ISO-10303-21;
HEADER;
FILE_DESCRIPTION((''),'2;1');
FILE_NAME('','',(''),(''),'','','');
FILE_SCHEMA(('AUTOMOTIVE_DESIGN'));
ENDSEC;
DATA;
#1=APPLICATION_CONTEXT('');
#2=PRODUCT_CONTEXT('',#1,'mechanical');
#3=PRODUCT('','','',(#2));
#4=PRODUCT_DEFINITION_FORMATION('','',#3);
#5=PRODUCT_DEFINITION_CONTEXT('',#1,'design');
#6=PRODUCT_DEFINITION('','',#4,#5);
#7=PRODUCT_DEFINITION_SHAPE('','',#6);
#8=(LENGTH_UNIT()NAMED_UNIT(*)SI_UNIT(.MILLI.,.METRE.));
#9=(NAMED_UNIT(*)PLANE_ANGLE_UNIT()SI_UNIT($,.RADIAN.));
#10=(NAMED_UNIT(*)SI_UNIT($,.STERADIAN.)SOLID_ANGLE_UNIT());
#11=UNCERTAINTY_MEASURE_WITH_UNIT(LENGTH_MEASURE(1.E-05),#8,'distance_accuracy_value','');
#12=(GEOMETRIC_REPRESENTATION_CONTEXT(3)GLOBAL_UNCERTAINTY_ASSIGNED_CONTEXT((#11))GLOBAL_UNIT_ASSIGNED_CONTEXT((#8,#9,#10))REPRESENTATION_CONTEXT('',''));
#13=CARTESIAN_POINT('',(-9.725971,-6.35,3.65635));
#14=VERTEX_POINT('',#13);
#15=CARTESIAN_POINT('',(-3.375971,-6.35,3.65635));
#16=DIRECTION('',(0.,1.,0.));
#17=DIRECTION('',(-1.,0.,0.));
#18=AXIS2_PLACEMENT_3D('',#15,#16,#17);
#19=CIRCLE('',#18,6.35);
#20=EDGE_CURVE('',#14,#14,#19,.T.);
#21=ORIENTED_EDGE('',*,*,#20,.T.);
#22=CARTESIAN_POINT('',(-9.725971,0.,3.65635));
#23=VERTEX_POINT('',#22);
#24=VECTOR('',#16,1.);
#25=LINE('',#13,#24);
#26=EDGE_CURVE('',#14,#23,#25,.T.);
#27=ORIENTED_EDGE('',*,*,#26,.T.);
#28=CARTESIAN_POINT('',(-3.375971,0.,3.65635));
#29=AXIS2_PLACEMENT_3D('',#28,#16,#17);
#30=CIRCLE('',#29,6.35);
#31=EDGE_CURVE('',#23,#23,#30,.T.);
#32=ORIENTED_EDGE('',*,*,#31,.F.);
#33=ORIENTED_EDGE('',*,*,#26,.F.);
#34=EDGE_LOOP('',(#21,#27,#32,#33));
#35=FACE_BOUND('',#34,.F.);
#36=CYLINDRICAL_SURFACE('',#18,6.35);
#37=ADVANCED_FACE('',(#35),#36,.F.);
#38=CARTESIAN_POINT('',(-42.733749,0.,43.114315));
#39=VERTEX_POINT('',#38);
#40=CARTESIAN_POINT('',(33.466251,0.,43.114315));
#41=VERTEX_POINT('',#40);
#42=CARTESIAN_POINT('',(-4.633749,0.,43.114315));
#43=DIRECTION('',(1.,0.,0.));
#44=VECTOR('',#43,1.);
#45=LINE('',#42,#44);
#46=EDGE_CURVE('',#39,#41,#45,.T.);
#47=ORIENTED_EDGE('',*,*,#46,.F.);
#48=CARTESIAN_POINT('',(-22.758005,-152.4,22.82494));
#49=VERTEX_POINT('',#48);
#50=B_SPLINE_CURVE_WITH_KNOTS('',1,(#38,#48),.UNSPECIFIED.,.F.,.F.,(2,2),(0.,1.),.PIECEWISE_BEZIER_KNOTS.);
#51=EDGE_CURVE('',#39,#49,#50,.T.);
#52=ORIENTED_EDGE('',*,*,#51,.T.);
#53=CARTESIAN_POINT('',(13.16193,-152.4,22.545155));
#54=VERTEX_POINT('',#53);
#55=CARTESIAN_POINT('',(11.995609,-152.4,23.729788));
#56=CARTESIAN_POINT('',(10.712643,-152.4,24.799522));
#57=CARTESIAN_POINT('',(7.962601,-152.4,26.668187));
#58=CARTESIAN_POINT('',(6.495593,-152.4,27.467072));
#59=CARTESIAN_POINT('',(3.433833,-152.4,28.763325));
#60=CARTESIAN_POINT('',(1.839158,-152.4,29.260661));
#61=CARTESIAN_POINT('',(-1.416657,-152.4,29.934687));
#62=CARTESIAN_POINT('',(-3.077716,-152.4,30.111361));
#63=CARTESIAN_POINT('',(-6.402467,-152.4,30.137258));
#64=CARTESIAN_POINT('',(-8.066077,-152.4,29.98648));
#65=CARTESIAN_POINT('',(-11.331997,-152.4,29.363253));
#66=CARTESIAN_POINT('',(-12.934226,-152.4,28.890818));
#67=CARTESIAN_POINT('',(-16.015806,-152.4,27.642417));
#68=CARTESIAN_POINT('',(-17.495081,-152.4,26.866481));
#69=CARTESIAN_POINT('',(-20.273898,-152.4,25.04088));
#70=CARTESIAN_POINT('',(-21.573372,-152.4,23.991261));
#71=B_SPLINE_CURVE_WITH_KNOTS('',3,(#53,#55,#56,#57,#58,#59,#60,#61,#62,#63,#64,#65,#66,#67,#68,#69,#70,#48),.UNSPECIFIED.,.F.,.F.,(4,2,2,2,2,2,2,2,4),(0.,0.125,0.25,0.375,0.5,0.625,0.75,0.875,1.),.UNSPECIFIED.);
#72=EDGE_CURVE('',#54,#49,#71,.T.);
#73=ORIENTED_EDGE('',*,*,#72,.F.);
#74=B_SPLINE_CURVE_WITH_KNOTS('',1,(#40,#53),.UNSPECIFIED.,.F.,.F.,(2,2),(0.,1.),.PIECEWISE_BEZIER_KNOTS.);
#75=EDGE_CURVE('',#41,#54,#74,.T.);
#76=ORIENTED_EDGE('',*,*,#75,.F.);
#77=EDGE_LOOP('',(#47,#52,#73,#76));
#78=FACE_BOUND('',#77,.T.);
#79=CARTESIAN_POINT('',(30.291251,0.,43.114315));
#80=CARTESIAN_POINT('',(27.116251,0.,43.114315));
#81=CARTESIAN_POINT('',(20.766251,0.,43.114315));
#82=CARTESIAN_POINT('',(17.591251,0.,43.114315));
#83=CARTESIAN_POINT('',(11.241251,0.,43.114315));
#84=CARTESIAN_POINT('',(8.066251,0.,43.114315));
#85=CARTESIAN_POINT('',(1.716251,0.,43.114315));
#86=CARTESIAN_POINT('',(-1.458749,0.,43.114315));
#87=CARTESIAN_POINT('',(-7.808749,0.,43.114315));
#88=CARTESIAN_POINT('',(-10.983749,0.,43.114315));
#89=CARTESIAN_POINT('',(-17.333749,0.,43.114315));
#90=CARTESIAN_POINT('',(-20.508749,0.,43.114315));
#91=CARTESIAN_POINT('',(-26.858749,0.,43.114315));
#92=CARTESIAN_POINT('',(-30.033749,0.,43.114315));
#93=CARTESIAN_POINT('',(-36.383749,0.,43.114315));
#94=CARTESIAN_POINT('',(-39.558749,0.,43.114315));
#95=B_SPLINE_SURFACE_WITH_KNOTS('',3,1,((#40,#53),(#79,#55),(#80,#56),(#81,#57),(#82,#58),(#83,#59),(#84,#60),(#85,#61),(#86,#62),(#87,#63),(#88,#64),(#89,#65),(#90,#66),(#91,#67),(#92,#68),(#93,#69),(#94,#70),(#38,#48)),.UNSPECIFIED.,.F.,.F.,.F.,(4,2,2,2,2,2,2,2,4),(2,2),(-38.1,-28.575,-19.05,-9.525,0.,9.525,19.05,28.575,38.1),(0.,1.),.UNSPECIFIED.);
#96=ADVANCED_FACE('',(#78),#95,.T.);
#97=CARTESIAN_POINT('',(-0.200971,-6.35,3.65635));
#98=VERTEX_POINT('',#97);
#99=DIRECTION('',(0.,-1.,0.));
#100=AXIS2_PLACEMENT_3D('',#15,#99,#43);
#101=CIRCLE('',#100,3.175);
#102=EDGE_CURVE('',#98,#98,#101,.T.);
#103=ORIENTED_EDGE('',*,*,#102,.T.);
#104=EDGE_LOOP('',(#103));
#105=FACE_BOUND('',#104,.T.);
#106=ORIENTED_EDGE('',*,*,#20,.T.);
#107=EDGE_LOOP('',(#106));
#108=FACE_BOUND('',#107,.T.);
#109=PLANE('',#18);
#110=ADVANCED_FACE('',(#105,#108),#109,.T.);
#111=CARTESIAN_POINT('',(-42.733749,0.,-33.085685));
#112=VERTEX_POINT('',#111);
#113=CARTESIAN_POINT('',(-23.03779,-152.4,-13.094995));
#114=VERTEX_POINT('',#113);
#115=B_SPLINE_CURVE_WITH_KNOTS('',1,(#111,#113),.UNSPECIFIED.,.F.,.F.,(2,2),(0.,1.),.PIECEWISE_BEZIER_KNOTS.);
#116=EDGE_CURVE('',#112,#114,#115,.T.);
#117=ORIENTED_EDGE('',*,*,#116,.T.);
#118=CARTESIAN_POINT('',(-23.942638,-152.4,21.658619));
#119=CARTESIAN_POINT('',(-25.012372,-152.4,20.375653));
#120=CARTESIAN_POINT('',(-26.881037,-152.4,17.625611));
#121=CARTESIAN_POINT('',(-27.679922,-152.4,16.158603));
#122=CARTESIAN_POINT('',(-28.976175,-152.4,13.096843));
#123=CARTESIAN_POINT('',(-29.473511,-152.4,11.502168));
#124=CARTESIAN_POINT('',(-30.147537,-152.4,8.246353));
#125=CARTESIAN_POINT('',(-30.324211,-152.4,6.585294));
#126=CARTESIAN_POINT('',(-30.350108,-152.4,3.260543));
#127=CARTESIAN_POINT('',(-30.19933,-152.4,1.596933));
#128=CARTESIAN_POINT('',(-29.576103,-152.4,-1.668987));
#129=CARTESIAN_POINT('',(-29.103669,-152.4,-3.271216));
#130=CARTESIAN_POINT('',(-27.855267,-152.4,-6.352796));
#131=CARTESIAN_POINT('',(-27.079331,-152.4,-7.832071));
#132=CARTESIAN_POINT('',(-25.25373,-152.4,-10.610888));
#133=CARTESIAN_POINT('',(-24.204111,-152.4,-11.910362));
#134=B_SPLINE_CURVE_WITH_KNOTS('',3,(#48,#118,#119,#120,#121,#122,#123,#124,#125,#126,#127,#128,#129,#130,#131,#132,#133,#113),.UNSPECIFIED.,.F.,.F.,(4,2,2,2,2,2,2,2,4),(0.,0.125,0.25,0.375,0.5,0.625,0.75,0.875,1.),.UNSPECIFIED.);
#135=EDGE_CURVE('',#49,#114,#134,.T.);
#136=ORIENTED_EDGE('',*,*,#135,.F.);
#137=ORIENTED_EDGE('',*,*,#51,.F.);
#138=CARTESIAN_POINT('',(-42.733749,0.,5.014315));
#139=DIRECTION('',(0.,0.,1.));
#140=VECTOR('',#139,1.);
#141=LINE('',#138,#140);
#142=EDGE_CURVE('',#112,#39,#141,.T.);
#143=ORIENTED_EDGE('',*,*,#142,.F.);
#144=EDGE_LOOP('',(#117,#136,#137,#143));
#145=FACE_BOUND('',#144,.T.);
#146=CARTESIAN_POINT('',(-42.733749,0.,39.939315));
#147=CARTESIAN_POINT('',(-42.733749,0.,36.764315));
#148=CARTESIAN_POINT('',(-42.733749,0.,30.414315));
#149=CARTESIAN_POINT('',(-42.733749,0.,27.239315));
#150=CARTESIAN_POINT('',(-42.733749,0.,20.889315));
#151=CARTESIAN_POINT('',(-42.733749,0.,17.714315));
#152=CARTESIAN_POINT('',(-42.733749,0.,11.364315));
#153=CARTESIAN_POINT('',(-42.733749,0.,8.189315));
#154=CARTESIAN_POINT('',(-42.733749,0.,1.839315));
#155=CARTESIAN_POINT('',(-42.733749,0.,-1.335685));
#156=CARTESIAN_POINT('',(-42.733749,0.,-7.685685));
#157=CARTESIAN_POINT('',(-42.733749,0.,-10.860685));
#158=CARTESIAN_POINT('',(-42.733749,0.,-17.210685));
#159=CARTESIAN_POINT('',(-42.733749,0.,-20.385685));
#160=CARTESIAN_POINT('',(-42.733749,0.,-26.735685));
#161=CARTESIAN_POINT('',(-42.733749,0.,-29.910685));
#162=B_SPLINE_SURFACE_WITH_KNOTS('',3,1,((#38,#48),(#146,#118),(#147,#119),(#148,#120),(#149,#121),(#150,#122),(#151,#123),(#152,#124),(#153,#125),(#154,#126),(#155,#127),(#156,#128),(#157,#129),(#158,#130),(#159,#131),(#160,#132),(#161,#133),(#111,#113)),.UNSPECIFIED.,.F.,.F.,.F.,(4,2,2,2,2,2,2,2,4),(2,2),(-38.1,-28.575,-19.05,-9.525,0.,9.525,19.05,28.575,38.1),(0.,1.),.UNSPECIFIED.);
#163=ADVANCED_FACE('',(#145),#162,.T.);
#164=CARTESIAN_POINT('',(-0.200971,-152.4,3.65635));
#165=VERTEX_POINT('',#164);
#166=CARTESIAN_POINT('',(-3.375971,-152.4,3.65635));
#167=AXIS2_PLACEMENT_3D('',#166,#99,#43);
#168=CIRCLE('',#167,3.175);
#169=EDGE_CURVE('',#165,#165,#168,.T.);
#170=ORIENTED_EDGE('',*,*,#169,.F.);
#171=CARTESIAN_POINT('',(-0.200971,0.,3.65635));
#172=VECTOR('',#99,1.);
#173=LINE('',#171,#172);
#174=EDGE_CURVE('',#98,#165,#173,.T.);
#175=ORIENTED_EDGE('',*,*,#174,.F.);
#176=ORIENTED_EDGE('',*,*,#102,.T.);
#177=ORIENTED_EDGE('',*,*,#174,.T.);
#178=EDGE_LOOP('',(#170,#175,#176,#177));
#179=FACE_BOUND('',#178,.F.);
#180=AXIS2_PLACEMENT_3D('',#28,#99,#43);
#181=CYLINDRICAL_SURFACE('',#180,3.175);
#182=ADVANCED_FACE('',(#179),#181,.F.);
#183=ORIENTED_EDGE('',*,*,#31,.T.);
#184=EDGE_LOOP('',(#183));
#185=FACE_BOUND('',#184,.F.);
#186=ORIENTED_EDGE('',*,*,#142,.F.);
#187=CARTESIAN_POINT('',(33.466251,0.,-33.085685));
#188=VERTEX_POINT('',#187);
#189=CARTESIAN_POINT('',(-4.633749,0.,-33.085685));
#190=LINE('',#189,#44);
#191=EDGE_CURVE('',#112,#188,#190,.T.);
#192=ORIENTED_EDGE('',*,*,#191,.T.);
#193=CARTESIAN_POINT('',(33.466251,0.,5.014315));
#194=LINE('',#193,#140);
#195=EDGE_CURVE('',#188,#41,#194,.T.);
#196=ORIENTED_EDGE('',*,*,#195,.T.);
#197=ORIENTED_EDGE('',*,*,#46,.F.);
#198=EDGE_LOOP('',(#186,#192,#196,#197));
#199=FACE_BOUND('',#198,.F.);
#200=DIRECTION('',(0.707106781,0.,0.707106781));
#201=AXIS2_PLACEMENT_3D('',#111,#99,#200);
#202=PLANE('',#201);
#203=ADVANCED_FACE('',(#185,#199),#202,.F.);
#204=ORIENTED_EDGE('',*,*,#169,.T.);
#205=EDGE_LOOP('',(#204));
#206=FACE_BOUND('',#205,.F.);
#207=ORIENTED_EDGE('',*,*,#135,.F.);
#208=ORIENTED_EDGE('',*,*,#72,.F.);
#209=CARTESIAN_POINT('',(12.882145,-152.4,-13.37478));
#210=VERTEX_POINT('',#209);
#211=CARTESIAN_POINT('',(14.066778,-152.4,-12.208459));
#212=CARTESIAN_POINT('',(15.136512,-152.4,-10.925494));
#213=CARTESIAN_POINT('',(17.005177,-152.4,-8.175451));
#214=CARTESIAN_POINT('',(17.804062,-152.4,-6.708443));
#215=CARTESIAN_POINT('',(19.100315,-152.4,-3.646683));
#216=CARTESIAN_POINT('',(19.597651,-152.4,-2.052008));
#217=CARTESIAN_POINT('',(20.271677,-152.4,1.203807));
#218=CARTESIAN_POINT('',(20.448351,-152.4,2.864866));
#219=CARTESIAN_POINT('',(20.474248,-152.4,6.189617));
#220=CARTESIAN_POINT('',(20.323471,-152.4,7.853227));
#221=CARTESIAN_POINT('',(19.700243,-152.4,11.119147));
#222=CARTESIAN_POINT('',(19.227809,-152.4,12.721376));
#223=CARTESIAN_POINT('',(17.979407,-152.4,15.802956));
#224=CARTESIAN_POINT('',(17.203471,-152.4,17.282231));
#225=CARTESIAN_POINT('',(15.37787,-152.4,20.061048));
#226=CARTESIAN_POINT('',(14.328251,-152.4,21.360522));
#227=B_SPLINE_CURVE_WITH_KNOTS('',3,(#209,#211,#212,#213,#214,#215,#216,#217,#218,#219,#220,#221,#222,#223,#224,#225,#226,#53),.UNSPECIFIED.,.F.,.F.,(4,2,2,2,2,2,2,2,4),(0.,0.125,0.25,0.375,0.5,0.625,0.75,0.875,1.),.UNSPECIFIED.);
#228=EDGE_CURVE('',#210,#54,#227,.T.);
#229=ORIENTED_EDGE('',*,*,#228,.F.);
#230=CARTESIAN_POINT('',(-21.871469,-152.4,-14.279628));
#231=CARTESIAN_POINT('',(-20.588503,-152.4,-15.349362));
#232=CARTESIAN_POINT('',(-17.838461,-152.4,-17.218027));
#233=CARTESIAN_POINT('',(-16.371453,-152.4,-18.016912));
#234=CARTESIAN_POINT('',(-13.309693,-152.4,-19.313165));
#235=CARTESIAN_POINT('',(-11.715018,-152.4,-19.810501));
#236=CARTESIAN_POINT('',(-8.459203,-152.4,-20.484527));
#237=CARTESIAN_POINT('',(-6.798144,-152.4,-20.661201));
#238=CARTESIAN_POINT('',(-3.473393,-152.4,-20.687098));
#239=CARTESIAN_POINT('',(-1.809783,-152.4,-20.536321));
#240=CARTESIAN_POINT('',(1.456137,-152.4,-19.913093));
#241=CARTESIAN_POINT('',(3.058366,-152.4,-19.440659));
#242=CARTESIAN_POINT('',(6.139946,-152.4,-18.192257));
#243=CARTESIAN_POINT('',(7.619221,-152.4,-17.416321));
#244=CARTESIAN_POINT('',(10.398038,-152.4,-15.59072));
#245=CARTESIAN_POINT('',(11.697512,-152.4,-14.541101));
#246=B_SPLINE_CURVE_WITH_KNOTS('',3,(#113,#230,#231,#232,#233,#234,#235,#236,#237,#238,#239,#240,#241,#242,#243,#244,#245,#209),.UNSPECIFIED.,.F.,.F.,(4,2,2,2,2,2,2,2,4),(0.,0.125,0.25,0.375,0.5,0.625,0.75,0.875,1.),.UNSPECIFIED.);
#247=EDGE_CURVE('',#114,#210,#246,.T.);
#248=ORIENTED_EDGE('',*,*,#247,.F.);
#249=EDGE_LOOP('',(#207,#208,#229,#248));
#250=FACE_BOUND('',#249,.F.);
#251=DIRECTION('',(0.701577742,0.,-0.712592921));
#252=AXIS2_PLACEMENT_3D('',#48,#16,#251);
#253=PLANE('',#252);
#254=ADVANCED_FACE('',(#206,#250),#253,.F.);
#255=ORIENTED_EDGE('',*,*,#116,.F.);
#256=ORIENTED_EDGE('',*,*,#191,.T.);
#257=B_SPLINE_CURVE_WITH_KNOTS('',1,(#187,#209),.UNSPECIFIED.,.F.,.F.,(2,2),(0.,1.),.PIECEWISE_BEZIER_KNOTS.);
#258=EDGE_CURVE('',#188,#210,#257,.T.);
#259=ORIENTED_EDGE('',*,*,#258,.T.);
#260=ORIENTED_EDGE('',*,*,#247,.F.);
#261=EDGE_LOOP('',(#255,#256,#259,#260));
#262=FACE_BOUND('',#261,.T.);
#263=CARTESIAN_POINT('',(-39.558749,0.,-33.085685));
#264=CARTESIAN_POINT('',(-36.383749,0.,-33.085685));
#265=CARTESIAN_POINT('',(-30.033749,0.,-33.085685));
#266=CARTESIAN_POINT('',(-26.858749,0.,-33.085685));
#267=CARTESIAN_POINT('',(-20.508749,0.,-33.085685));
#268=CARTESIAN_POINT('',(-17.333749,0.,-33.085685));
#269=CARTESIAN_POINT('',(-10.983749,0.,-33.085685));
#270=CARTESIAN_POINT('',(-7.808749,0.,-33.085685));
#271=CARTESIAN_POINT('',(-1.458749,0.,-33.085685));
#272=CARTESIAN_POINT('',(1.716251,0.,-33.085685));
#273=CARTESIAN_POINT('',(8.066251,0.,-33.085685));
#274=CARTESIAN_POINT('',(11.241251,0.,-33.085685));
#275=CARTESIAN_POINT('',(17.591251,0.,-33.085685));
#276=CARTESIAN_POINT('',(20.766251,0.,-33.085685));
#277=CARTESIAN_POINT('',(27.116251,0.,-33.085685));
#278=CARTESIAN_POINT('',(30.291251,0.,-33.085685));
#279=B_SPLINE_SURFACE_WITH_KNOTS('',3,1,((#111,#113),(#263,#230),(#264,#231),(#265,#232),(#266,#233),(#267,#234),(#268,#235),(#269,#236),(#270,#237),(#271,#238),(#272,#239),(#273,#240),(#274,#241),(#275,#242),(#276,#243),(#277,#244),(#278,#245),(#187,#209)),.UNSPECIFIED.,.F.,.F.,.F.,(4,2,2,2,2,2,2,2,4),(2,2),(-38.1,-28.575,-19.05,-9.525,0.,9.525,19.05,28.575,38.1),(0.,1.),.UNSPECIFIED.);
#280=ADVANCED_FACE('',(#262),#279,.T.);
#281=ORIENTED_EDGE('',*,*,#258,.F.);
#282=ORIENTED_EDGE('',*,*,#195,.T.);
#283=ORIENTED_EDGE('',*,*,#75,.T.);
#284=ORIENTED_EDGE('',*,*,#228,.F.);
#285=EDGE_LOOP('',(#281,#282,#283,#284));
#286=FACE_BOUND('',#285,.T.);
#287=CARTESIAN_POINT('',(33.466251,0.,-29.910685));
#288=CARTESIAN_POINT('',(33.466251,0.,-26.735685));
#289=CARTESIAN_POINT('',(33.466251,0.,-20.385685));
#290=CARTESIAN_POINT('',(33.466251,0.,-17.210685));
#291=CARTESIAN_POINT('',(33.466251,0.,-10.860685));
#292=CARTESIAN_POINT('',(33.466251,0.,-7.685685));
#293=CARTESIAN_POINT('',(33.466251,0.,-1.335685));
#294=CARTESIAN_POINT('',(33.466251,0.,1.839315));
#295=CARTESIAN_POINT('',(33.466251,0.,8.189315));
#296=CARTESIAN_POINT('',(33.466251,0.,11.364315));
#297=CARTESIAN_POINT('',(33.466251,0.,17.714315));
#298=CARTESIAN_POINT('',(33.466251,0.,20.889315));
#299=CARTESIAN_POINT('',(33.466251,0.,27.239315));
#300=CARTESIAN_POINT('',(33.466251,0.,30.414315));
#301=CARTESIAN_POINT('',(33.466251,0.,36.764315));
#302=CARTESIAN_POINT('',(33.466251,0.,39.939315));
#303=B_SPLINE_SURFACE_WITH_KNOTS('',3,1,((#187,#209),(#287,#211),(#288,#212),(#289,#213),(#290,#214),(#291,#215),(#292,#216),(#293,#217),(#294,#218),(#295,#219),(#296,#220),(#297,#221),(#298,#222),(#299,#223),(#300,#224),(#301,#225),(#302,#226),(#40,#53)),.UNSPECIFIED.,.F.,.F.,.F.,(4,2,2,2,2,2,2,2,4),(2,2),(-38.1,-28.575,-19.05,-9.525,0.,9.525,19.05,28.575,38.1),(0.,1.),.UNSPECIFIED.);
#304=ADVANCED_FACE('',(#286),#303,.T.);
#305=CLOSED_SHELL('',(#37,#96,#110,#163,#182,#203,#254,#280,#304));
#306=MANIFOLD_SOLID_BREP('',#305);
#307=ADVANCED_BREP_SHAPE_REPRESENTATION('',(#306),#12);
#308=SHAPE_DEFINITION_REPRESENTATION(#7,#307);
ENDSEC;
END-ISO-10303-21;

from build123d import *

# Parameters (mm, degrees)
F0_W           = 76.2
F0_H           = 76.2
F5_D           = 6.35
F5_CBORE_D     = 12.7
F5_CBORE_DEPTH = 6.35


# Not quite as in the source:
# - the arcs of a loft's sections are written as splines that run evenly, so that the points pair up as in the source's solid


with BuildPart() as f3:
    # F0 (on Front) → F3 section 0
    with BuildSketch(Plane.XZ):
        with Locations((-4.6337489039, 5.0143152279)):
            Rectangle(F0_W, F0_H)
    # F2 (on offset) → F3 section 1
    with BuildSketch(Plane.XZ.offset(152.4)):
        with BuildLine():
            add(Edge.make_bspline(
                [(-22.7580046449, 22.8249401439), (-23.9426377251, 21.6586189854), (-25.0123717458, 20.375653377), (-26.8810371807, 17.6256112299), (-27.6799223885, 16.1586026914), (-28.976175333, 13.0968432916), (-29.4735110173, 11.5021681383), (-30.1475371977, 8.2463531825), (-30.3242110272, 6.5852938864), (-30.3501079954, 3.2605425174), (-30.1993304937, 1.5969326556), (-29.5761030438, -1.6689867959), (-29.1036685059, -3.2712156294), (-27.8552669191, -6.3527957105), (-27.0793307394, -7.8320707601), (-25.2537303887, -10.6108880765), (-24.2041113593, -11.9103616316), (-23.0377902009, -13.0949947119)],
                knots=[0, 0, 0, 0, 0.125, 0.125, 0.25, 0.25, 0.375, 0.375, 0.5, 0.5, 0.625, 0.625, 0.75, 0.75, 0.875, 0.875, 1, 1, 1, 1], degree=3))
            add(Edge.make_bspline(
                [(-23.0377902009, -13.0949947119), (-21.8714690424, -14.2796277922), (-20.588503434, -15.3493618129), (-17.8384612869, -17.2180272478), (-16.3714527484, -18.0169124555), (-13.3096933486, -19.3131654), (-11.7150181953, -19.8105010844), (-8.4592032395, -20.4845272648), (-6.7981439434, -20.6612010942), (-3.4733925744, -20.6870980624), (-1.8097827126, -20.5363205608), (1.4561367389, -19.9130931108), (3.0583655724, -19.440658573), (6.1399456535, -18.1922569862), (7.6192207031, -17.4163208065), (10.3980380195, -15.5907204558), (11.6975115746, -14.5411014264), (12.8821446549, -13.3747802679)],
                knots=[0, 0, 0, 0, 0.125, 0.125, 0.25, 0.25, 0.375, 0.375, 0.5, 0.5, 0.625, 0.625, 0.75, 0.75, 0.875, 0.875, 1, 1, 1, 1], degree=3))
            add(Edge.make_bspline(
                [(12.8821446549, -13.3747802679), (14.0667777352, -12.2084591095), (15.1365117559, -10.9254935011), (17.0051771908, -8.175451354), (17.8040623985, -6.7084428155), (19.100315343, -3.6466834156), (19.5976510274, -2.0520082624), (20.2716772078, 1.2038066934), (20.4483510372, 2.8648659896), (20.4742480054, 6.1896173585), (20.3234705038, 7.8532272203), (19.7002430538, 11.1191466719), (19.227808516, 12.7213755053), (17.9794069292, 15.8029555865), (17.2034707495, 17.282230636), (15.3778703988, 20.0610479524), (14.3282513694, 21.3605215076), (13.1619302109, 22.5451545878)],
                knots=[0, 0, 0, 0, 0.125, 0.125, 0.25, 0.25, 0.375, 0.375, 0.5, 0.5, 0.625, 0.625, 0.75, 0.75, 0.875, 0.875, 1, 1, 1, 1], degree=3))
            add(Edge.make_bspline(
                [(13.1619302109, 22.5451545878), (11.9956090524, 23.7297876681), (10.7126434441, 24.7995216888), (7.962601297, 26.6681871237), (6.4955927584, 27.4670723315), (3.4338333586, 28.763325276), (1.8391582054, 29.2606609603), (-1.4166567504, 29.9346871407), (-3.0777160466, 30.1113609702), (-6.4024674155, 30.1372579384), (-8.0660772773, 29.9864804367), (-11.3319967289, 29.3632529868), (-12.9342255623, 28.8908184489), (-16.0158056435, 27.6424168621), (-17.495080693, 26.8664806824), (-20.2738980095, 25.0408803317), (-21.5733715646, 23.9912613023), (-22.7580046449, 22.8249401439)],
                knots=[0, 0, 0, 0, 0.125, 0.125, 0.25, 0.25, 0.375, 0.375, 0.5, 0.5, 0.625, 0.625, 0.75, 0.75, 0.875, 0.875, 1, 1, 1, 1], degree=3))
        make_face()
    loft(ruled=True)

    # F5 (through all)
    with Locations(Plane(origin=(0, 0, 0), x_dir=(-1, 0, 0), z_dir=(0, 1, 0))):
        with Locations((3.3759707585, 3.656350309)):
            CounterBoreHole(F5_D / 2, F5_CBORE_D / 2, F5_CBORE_DEPTH)


solid = f3.part
